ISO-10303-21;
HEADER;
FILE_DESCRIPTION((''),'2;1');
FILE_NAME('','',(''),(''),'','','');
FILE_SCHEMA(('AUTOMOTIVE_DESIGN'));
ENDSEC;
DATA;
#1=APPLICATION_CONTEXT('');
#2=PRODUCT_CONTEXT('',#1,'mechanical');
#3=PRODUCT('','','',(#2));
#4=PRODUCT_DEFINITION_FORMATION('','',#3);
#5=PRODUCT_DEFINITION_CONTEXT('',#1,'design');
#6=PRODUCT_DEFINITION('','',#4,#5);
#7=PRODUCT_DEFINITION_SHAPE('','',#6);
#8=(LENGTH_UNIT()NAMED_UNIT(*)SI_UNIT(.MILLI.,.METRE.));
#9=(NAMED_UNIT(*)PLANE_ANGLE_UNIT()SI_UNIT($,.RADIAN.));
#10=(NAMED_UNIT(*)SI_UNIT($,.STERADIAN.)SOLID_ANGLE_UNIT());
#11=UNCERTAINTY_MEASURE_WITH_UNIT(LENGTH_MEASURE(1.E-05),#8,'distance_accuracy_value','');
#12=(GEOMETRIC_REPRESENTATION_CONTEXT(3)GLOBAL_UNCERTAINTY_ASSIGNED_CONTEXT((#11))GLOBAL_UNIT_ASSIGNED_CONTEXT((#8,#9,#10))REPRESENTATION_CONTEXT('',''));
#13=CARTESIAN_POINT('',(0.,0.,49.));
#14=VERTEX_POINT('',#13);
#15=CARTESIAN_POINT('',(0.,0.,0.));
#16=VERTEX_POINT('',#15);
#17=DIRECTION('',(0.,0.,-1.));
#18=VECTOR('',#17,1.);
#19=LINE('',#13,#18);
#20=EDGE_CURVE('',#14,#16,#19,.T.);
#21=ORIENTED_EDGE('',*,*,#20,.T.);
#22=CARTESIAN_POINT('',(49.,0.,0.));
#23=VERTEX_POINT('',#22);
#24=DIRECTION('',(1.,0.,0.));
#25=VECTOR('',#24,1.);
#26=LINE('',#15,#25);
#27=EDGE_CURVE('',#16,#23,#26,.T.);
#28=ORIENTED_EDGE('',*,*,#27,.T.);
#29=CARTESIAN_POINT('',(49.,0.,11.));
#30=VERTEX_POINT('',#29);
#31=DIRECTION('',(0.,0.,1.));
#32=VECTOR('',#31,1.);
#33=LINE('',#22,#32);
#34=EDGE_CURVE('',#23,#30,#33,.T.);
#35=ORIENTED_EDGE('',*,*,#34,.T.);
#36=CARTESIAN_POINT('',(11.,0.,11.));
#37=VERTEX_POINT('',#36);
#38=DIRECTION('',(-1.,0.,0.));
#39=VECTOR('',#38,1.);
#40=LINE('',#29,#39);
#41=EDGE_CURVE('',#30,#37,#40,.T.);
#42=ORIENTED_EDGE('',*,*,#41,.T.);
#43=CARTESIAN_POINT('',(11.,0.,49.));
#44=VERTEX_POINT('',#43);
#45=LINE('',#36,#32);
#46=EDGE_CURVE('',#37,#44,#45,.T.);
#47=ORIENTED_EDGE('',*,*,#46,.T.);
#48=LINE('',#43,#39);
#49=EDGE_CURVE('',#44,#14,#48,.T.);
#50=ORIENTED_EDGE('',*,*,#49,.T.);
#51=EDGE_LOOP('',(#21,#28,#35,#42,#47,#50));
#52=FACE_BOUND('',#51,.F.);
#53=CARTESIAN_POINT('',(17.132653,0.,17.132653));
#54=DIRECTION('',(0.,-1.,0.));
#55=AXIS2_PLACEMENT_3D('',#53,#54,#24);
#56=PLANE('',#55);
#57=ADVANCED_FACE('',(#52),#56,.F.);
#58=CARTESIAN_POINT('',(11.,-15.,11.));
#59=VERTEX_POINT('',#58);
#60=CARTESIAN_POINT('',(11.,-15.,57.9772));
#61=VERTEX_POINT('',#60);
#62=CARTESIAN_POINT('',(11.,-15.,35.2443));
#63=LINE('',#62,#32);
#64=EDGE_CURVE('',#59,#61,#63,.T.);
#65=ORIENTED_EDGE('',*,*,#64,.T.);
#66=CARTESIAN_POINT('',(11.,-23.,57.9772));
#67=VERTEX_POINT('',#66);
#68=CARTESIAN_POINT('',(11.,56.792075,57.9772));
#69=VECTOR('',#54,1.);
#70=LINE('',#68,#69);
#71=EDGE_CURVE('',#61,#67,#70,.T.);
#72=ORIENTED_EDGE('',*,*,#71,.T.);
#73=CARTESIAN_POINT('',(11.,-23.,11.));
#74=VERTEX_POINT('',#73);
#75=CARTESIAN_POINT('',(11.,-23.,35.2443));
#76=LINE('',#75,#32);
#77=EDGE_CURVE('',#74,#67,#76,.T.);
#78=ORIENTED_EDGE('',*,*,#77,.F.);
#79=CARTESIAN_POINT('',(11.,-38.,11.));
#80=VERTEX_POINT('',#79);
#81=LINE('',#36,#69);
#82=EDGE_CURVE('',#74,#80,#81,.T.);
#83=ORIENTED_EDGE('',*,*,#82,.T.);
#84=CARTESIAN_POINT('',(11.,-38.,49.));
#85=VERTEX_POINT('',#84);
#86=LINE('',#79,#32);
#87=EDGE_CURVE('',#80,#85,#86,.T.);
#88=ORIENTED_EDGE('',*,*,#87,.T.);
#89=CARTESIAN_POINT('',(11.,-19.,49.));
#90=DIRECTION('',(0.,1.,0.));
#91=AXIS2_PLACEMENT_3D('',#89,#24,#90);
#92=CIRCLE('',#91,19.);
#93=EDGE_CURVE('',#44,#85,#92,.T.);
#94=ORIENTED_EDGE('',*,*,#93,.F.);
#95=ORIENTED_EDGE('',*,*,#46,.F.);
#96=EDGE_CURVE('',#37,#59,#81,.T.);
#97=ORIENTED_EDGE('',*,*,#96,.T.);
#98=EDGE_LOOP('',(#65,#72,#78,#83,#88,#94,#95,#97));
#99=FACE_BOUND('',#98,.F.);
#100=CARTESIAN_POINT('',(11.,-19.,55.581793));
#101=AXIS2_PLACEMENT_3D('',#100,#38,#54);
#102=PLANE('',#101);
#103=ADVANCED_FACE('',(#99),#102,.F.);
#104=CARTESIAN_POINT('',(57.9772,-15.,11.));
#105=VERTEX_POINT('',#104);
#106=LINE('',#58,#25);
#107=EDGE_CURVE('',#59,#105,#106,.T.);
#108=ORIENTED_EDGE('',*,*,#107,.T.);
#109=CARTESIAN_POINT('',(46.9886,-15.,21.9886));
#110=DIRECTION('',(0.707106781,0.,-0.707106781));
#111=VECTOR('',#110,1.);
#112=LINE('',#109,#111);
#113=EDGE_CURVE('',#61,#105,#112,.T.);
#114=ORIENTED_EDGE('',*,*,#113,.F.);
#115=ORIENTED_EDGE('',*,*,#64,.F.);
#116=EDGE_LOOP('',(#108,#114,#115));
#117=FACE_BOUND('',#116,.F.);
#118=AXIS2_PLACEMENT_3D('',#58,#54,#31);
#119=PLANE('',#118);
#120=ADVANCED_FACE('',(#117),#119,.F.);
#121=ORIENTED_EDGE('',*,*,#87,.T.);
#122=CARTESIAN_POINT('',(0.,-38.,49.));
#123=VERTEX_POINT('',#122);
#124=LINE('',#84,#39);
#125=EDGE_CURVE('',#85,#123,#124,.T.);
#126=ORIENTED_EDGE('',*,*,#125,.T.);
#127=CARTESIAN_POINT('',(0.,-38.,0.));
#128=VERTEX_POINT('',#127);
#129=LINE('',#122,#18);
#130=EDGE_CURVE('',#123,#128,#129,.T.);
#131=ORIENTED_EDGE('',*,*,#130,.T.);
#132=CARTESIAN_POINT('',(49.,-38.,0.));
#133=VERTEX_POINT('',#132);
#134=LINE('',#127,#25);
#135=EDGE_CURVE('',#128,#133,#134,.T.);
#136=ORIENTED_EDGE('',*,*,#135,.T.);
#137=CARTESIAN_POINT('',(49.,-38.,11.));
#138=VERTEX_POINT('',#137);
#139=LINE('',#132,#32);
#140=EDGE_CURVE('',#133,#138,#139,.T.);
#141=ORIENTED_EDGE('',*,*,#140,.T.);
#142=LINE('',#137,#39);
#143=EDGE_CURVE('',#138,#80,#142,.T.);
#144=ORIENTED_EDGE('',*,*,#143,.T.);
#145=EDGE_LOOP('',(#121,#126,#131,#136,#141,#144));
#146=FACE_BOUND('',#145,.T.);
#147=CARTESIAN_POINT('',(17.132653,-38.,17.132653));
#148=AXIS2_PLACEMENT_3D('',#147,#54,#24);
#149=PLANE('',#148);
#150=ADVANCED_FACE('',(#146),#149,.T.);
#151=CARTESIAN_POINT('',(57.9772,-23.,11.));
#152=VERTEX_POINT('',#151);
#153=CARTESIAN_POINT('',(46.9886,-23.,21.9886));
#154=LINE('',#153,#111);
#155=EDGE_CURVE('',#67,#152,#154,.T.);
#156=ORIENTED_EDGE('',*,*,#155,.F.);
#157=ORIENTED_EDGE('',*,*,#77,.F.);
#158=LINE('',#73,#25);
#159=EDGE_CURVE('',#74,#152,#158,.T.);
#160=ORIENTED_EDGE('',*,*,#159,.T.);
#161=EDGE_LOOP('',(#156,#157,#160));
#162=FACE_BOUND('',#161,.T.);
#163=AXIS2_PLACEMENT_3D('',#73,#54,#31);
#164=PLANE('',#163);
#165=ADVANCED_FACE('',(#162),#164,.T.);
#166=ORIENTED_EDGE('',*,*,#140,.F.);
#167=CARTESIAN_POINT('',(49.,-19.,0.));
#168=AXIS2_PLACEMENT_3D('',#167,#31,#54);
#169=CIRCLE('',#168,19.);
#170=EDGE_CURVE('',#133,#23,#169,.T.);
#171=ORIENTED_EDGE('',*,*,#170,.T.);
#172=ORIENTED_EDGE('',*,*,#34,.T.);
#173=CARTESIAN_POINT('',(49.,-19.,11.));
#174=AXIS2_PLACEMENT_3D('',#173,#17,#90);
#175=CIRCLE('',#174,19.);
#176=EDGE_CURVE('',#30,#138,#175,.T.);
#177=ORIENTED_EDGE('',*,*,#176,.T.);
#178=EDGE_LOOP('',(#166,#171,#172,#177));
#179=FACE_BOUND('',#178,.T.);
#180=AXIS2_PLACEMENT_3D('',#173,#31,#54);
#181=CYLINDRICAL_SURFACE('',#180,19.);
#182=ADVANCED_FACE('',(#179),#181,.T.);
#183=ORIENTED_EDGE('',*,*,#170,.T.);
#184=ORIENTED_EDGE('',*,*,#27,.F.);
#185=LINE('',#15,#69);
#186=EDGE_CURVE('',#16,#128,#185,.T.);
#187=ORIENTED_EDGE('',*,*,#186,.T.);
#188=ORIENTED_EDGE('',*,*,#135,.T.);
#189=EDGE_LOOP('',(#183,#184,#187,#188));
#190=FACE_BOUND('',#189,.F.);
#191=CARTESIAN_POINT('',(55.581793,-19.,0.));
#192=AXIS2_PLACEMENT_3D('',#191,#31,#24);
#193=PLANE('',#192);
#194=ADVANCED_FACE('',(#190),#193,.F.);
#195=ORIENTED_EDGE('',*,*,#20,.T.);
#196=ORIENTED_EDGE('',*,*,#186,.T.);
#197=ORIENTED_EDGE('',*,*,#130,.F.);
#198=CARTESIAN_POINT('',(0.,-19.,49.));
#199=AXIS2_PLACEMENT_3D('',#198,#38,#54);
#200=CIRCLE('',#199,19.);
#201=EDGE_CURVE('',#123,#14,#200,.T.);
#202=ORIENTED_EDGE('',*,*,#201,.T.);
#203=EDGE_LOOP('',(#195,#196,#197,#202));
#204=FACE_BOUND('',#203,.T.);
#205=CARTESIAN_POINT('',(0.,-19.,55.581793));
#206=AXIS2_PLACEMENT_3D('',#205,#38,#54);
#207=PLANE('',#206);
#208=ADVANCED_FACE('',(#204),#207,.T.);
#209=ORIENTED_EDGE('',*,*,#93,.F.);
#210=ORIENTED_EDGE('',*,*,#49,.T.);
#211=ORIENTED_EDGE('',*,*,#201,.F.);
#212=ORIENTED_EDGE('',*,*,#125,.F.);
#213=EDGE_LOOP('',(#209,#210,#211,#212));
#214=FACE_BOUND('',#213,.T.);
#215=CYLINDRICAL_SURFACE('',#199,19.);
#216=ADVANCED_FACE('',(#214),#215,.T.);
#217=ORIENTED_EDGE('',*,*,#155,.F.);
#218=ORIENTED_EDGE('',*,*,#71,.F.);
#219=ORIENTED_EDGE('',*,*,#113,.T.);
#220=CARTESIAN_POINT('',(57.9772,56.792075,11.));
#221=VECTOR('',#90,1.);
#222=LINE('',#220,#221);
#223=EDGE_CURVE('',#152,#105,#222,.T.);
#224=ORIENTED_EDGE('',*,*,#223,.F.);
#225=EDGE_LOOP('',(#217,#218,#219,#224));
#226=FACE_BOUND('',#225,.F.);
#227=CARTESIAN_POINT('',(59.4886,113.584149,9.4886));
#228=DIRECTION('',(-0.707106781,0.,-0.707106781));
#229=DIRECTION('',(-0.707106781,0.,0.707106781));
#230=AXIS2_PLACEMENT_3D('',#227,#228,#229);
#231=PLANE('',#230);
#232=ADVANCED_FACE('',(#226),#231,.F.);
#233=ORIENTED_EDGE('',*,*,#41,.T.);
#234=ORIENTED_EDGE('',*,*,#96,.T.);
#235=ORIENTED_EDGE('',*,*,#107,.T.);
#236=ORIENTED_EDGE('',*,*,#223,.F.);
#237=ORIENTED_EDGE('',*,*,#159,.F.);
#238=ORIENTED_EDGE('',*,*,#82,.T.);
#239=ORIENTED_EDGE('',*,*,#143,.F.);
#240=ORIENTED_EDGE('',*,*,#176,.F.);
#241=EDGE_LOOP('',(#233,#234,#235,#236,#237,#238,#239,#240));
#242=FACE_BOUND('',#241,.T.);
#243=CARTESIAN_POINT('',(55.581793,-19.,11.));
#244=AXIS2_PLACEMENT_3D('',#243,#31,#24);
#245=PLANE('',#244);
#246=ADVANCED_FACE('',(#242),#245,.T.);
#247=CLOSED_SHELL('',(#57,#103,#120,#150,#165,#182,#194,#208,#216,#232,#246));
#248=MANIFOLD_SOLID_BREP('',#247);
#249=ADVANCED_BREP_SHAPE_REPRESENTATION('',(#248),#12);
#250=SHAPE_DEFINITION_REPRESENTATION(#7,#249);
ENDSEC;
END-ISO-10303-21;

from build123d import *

# Parameters (mm, degrees)
F1_DEPTH    = 38
F3_DEPTH    = 11
F5_DEPTH    = 11
F6_W        = 8
F6_H        = 48.4886
F7_DEPTH    = 48.4886
F8_T4_DEPTH = 265.1682987966


# Not quite as in the source:
# - a fillet or chamfer that OpenCascade refuses, or shapes differently, is made with other operations: its cross-section is extruded or revolved along the edge and cut away or added


with BuildPart() as f1:
    # F0 (on Front) → F1 (new body)
    with BuildSketch(Plane.XZ):
        Polygon((0, 49), (0, 0), (49, 0), (49, 11), (11, 11), (11, 49), align=None)
    extrude(amount=F1_DEPTH)

    # F2 (on face) → F3 (join)
    with BuildSketch(Plane(origin=(0, 0, 0), x_dir=(0, -1, 0), z_dir=(-1, 0, 0))):
        with BuildLine():
            Line((0, 49), (38, 49))
            ThreePointArc((38, 49), (19, 68), (0, 49))
        make_face()
    extrude(amount=-F3_DEPTH)

    # F4 (on face) → F5 (join)
    with BuildSketch(Plane.XY.offset(11)):
        with BuildLine():
            Line((49, 0), (49, -38))
            ThreePointArc((49, -38), (68, -19), (49, 0))
        make_face()
    extrude(amount=-F5_DEPTH)

    # F6 (on face) → F7 (join)
    with BuildSketch(Plane.YZ.offset(11)):
        with Locations((-19, 35.2443)):
            Rectangle(F6_W, F6_H)
    extrude(amount=F7_DEPTH)

    # F8: chamfer of 50 on 1 edges, made by hand


with BuildPart() as f8_tool2:
    # F8_s3 → F8_t4 (new body)
    with BuildSketch(Plane.XZ.offset(-113.5841493983)):
        Polygon((59.4886, 9.4886), (9.4886, 59.4886), (59.4886, 59.4886), align=None)
    extrude(amount=F8_T4_DEPTH)

    split(bisect_by=Plane.XY.offset(11), keep=Keep.TOP)

    split(bisect_by=Plane.YZ.offset(11), keep=Keep.TOP)


with BuildPart() as f1_1:
    add(f1.part)

    # F8_t1: cut F8_tool2
    add(f8_tool2.part, mode=Mode.SUBTRACT)


solid = f1_1.part
